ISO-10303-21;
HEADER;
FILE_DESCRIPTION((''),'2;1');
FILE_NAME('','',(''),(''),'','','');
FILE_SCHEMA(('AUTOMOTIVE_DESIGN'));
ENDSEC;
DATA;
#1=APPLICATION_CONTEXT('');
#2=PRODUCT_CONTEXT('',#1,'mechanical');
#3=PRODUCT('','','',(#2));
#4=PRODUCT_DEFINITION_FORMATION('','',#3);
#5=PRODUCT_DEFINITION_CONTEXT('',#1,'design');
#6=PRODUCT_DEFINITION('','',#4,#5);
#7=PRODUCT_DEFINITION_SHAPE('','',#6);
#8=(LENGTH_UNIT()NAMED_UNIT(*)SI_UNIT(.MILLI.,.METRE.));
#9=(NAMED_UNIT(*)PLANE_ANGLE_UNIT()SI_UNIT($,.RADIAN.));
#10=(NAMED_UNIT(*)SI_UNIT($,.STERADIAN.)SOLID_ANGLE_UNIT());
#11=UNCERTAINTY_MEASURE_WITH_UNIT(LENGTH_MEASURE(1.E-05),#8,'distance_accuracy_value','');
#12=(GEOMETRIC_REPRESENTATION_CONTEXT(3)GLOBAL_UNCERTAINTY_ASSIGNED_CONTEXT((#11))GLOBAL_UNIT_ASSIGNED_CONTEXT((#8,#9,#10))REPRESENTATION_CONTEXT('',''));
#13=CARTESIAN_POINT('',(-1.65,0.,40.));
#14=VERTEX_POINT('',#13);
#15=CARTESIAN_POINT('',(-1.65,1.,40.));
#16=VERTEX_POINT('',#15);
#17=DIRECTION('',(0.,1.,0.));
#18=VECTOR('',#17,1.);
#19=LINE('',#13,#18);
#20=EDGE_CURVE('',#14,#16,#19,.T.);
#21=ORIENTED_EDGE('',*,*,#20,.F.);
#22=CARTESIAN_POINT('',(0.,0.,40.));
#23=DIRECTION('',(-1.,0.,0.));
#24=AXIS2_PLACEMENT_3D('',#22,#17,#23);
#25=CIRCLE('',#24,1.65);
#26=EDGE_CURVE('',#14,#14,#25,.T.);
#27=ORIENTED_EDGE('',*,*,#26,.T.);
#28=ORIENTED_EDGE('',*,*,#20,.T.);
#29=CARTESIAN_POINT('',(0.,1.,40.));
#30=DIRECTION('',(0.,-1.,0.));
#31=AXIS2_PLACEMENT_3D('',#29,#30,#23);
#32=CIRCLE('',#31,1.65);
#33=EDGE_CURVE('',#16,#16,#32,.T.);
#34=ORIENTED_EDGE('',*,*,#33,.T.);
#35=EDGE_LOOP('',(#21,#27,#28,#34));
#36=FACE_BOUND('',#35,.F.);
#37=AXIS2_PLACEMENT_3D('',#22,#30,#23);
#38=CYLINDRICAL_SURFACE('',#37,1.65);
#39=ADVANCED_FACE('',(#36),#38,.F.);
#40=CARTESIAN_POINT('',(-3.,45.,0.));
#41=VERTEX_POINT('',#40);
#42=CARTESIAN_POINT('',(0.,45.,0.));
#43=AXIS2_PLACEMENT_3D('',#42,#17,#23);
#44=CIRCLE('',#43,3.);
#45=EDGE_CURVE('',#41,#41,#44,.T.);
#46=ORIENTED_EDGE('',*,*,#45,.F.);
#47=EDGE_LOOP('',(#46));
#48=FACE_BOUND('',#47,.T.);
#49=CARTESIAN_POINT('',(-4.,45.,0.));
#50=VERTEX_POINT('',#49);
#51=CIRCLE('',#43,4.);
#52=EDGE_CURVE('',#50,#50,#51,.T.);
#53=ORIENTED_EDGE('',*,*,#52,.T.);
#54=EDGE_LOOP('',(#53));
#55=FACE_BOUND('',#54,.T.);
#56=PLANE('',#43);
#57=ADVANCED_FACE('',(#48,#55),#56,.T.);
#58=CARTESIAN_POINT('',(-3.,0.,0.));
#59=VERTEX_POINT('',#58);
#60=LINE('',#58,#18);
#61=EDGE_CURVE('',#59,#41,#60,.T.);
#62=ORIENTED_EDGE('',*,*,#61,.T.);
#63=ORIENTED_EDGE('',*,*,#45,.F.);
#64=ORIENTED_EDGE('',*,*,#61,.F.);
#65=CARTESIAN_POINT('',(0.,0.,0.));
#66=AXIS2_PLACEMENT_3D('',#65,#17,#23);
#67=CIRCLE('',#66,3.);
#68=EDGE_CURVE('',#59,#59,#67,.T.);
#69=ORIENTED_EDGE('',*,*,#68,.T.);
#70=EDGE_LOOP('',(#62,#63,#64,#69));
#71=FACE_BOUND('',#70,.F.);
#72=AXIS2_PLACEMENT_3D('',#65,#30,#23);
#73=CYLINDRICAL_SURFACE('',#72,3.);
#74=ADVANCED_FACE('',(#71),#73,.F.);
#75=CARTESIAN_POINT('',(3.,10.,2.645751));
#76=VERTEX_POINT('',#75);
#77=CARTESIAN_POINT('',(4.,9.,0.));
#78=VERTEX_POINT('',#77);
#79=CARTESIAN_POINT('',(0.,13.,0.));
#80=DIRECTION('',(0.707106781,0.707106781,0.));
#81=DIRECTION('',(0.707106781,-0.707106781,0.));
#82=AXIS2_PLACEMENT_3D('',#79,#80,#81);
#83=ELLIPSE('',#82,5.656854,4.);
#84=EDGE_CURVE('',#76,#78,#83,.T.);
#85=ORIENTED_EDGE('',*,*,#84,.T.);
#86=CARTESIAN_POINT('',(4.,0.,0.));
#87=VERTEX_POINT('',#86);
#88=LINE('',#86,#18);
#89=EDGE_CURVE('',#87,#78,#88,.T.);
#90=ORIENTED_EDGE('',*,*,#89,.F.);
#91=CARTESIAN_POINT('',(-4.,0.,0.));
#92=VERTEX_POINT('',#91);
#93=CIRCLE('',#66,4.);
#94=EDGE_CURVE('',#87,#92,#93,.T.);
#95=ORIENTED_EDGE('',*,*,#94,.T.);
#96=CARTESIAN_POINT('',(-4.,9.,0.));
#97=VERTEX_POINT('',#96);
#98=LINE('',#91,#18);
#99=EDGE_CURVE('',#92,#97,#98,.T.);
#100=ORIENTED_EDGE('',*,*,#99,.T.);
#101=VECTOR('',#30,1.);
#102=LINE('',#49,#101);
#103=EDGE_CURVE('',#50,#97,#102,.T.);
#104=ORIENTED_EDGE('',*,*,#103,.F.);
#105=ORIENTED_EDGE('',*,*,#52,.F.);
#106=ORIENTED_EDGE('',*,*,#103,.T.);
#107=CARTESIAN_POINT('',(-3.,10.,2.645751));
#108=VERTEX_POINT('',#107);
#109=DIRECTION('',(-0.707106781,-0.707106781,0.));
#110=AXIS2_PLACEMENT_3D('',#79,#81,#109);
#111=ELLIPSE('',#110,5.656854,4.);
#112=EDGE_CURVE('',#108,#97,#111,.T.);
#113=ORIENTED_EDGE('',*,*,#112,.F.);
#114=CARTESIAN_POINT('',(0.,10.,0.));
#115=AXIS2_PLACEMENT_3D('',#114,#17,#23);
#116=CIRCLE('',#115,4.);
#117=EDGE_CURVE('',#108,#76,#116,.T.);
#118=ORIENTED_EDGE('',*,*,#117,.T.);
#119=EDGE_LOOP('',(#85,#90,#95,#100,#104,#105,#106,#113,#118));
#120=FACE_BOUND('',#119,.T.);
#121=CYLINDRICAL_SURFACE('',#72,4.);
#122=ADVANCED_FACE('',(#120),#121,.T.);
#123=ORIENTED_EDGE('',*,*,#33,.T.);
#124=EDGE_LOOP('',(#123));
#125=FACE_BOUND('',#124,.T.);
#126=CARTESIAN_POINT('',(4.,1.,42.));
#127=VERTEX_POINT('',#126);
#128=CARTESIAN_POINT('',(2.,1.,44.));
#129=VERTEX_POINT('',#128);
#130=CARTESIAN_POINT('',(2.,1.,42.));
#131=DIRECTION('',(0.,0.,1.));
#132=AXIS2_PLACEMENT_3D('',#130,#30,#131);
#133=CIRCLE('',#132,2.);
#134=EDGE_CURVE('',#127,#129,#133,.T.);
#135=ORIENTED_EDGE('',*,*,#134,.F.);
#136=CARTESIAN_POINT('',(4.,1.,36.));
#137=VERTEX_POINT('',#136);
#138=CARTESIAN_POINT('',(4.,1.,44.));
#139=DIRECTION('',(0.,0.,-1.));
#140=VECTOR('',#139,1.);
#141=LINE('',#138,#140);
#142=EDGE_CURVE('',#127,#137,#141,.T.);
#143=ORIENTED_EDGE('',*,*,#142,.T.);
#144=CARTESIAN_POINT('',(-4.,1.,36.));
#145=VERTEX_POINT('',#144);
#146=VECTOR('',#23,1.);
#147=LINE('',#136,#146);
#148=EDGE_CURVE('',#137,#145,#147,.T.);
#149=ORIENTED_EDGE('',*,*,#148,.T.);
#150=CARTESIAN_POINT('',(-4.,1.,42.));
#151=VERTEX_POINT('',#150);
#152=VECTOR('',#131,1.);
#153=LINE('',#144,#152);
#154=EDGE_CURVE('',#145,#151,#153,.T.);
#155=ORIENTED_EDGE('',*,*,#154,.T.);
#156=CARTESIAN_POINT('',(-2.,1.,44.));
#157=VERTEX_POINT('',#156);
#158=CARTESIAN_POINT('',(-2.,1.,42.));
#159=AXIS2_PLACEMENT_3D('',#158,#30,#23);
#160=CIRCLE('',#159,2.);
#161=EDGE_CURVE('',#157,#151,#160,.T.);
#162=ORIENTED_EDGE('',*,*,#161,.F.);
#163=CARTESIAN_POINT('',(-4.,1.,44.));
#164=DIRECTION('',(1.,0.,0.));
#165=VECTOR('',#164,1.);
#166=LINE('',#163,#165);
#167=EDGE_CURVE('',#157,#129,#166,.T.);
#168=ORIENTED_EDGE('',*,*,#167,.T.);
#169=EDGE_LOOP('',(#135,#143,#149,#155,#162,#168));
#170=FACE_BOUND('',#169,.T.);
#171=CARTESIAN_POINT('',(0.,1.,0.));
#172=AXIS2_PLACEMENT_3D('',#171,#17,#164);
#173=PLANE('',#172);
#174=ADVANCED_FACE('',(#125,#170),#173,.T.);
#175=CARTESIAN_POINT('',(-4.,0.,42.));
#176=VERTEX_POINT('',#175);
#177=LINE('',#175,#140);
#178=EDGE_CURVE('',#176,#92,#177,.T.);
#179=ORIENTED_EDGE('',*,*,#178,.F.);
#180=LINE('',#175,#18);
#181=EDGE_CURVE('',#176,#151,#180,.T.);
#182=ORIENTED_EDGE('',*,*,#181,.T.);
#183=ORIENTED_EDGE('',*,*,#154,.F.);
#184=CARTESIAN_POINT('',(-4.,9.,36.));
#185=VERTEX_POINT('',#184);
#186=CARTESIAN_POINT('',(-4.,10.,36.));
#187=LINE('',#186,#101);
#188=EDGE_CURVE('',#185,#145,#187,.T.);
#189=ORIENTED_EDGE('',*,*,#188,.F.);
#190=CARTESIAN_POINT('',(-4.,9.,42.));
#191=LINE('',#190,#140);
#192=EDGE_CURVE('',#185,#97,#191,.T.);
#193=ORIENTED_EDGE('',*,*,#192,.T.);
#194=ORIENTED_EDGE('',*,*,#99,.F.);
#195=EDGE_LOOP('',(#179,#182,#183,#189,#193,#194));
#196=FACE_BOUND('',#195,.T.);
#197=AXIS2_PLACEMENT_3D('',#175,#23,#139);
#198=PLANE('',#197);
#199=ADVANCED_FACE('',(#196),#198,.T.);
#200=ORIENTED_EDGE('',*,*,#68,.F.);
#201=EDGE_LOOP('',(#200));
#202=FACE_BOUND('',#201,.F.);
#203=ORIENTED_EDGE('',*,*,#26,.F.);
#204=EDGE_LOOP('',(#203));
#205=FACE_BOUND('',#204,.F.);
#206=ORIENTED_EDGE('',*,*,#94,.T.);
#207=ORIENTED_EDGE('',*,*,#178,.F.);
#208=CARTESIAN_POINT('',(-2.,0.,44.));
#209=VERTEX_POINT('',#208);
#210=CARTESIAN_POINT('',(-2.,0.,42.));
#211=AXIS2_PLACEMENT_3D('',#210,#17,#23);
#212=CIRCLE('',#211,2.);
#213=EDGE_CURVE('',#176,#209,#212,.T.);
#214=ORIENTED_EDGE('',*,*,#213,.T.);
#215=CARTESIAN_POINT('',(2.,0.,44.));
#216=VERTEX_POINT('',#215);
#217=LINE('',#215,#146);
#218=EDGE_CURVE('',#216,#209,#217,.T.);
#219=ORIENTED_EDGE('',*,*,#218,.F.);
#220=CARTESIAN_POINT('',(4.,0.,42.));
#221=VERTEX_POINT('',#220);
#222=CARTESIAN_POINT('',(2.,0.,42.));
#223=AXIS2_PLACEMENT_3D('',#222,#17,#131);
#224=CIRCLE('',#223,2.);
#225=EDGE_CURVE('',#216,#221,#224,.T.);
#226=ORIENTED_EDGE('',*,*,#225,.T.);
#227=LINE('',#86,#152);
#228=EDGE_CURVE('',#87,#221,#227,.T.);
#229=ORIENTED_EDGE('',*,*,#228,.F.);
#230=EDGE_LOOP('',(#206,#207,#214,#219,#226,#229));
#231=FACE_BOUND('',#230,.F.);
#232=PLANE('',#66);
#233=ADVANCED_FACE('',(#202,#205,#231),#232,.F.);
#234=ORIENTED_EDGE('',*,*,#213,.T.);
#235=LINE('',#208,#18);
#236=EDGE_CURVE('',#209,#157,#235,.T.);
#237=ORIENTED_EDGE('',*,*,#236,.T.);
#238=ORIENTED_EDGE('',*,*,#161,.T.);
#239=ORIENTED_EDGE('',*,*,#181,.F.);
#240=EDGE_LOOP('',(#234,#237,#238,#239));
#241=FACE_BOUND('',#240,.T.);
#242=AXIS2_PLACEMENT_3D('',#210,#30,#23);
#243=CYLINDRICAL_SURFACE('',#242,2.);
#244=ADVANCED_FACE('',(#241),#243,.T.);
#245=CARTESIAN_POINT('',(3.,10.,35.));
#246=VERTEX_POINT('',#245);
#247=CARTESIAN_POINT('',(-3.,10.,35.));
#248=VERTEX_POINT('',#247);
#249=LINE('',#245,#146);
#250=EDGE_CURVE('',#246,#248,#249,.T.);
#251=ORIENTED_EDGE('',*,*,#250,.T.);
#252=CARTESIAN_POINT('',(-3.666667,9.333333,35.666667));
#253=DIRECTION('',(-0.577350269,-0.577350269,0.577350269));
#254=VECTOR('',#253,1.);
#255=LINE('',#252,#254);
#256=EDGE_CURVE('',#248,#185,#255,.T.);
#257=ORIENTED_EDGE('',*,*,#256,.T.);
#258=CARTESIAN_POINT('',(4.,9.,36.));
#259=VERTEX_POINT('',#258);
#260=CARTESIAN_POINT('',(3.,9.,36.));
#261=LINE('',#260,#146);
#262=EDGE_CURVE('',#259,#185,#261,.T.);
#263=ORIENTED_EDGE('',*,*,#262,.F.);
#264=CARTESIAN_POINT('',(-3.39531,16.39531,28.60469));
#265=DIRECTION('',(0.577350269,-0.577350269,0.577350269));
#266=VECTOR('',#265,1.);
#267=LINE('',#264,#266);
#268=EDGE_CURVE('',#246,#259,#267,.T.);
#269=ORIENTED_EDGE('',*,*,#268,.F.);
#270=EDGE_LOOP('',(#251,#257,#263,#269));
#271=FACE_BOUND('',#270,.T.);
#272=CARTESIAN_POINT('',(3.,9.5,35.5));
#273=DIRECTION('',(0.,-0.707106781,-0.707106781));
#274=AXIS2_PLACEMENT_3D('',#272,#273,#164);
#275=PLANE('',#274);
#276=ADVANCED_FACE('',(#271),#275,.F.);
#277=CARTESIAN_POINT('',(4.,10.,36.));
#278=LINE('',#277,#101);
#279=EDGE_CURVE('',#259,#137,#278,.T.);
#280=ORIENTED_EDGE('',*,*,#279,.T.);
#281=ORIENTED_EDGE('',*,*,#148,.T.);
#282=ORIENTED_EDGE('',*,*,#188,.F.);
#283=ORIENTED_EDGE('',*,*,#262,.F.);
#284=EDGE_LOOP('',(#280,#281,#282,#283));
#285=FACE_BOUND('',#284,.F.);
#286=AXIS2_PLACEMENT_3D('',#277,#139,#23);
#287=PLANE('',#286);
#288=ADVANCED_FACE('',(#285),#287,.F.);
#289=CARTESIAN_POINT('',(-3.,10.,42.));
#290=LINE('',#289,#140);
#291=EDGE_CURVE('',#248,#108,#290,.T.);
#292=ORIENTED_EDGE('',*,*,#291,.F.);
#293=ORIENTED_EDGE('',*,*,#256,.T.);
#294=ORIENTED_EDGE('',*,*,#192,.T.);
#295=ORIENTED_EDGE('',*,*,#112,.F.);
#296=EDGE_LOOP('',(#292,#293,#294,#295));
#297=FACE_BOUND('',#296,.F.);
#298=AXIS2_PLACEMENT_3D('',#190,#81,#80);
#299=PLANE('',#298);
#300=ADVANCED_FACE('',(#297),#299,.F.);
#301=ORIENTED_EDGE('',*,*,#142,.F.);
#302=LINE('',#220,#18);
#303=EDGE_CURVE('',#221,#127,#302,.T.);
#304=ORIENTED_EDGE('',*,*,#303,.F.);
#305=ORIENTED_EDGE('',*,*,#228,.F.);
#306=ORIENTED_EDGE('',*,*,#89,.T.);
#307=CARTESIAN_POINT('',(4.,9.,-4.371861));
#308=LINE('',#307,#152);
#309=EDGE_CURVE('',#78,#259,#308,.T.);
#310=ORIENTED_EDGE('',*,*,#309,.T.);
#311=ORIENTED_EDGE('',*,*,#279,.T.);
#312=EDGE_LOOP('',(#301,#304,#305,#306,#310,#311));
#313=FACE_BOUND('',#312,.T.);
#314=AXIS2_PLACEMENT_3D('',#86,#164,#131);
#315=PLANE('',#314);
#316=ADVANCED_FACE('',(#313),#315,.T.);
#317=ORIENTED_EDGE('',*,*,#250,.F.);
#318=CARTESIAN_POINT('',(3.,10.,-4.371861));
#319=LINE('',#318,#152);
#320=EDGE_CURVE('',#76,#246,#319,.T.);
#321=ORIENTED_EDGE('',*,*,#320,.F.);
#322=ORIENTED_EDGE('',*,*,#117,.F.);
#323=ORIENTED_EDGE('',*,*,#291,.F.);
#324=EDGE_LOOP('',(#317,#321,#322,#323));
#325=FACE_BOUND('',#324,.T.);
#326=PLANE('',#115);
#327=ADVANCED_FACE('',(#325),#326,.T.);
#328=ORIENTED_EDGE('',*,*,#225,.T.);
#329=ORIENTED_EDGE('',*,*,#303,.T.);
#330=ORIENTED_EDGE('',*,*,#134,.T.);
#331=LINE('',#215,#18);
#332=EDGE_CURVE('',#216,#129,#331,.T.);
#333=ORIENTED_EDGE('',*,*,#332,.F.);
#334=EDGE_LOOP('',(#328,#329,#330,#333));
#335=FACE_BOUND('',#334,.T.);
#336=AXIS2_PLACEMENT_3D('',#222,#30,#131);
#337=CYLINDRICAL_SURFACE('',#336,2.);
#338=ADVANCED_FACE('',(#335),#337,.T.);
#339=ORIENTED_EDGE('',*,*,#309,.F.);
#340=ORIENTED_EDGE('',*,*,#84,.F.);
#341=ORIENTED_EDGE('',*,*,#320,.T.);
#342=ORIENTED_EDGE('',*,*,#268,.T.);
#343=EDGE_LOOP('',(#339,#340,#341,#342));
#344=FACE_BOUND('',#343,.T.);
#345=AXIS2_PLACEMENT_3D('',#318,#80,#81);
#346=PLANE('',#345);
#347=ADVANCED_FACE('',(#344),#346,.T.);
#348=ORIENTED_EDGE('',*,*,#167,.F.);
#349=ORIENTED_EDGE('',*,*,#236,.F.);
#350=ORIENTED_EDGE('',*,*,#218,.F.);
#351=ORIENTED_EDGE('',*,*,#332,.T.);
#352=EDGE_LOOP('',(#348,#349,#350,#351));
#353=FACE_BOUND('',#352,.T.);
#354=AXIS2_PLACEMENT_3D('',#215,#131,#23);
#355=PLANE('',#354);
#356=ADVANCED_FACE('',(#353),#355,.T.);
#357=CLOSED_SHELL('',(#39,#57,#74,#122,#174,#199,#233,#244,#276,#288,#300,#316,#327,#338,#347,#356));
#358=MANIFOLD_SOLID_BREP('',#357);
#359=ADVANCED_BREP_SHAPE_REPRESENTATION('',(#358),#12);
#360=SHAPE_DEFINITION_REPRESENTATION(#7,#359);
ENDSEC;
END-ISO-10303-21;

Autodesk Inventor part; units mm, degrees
ref_plane "YZ Plane" through (0, 0, 0) normal (1, 0, 0) x (0, 1, 0)
ref_plane "XZ Plane" through (0, 0, 0) normal (0, 1, 0) x (-1, 0, 0)
ref_plane "XY Plane" through (0, 0, 0) normal (0, 0, 1) x (1, 0, 0)
sketch "Sketch1" plane through (0, 0, 0) normal (0, 1, 0) x (-1, 0, 0)
  circle A0 centre (0, 0) radius 3
  circle A1 centre (0, 0) radius 4
  dimension "d0" = 6
  dimension "d1" = 8
extrude "Extrusion1" add sketch "Sketch1" along normal blind 45
sketch "Sketch2" plane through (0, 0, 0) normal (0, 1, 0) x (-1, 0, 0)
  circle A0 centre (0, 0) radius 4 projected
  line L0 (-4, 0) -> (-4, 42)
  line L1 (-2, 44) -> (2, 44)
  line L2 (4, 42) -> (4, 0)
  arc A1 (-2, 44) -> (-4, 42) centre (-2, 42) ccw
  arc A2 (4, 42) -> (2, 44) centre (2, 42) ccw
  circle A3 centre (0, 40) radius 1.65
  point P0 (-4, 44)
  point P1 (4, 44)
  dimension "d4" = 44
  dimension "d5" = 8
  dimension "d6" = 2
  dimension "d10" = 3.3
extrude "Extrusion2" add sketch "Sketch2" along normal blind 10 contours A0 L0 A1 L1 A2 L2
chamfer "Chamfer1" distance 1 angle 45 5 edges at (4, 10, 21) (3.4142, 10, 43.4142) (0, 10, 44) (-3.4142, 10, 43.4142) (-4, 10, 21)
sketch "Sketch4" plane through (0, 10, 0) normal (0, 1, 0) x (1, 0, 0)
  circle A0 centre (0, -40) radius 1.65 projected
  line L0 (4, -36) -> (-4, -36)
  line L1 (-4, -36) -> (-4, -44)
  line L2 (-4, -44) -> (4, -44)
  line L3 (4, -44) -> (4, -36)
  line L4 (4, -36) -> (-4, -44) construction
  line L5 (-4, -36) -> (4, -44) construction
  point P0 (0, 0)
  point P1 (-2, -44)
  point P2 (-4, -42)
extrude "Extrusion3" cut sketch "Sketch4" against normal blind 9
chamfer "Chamfer4" distance 1 angle 45 1 edges at (0, 10, 36)
properties part number "Rod Spacer" material "ABS Plastic"
